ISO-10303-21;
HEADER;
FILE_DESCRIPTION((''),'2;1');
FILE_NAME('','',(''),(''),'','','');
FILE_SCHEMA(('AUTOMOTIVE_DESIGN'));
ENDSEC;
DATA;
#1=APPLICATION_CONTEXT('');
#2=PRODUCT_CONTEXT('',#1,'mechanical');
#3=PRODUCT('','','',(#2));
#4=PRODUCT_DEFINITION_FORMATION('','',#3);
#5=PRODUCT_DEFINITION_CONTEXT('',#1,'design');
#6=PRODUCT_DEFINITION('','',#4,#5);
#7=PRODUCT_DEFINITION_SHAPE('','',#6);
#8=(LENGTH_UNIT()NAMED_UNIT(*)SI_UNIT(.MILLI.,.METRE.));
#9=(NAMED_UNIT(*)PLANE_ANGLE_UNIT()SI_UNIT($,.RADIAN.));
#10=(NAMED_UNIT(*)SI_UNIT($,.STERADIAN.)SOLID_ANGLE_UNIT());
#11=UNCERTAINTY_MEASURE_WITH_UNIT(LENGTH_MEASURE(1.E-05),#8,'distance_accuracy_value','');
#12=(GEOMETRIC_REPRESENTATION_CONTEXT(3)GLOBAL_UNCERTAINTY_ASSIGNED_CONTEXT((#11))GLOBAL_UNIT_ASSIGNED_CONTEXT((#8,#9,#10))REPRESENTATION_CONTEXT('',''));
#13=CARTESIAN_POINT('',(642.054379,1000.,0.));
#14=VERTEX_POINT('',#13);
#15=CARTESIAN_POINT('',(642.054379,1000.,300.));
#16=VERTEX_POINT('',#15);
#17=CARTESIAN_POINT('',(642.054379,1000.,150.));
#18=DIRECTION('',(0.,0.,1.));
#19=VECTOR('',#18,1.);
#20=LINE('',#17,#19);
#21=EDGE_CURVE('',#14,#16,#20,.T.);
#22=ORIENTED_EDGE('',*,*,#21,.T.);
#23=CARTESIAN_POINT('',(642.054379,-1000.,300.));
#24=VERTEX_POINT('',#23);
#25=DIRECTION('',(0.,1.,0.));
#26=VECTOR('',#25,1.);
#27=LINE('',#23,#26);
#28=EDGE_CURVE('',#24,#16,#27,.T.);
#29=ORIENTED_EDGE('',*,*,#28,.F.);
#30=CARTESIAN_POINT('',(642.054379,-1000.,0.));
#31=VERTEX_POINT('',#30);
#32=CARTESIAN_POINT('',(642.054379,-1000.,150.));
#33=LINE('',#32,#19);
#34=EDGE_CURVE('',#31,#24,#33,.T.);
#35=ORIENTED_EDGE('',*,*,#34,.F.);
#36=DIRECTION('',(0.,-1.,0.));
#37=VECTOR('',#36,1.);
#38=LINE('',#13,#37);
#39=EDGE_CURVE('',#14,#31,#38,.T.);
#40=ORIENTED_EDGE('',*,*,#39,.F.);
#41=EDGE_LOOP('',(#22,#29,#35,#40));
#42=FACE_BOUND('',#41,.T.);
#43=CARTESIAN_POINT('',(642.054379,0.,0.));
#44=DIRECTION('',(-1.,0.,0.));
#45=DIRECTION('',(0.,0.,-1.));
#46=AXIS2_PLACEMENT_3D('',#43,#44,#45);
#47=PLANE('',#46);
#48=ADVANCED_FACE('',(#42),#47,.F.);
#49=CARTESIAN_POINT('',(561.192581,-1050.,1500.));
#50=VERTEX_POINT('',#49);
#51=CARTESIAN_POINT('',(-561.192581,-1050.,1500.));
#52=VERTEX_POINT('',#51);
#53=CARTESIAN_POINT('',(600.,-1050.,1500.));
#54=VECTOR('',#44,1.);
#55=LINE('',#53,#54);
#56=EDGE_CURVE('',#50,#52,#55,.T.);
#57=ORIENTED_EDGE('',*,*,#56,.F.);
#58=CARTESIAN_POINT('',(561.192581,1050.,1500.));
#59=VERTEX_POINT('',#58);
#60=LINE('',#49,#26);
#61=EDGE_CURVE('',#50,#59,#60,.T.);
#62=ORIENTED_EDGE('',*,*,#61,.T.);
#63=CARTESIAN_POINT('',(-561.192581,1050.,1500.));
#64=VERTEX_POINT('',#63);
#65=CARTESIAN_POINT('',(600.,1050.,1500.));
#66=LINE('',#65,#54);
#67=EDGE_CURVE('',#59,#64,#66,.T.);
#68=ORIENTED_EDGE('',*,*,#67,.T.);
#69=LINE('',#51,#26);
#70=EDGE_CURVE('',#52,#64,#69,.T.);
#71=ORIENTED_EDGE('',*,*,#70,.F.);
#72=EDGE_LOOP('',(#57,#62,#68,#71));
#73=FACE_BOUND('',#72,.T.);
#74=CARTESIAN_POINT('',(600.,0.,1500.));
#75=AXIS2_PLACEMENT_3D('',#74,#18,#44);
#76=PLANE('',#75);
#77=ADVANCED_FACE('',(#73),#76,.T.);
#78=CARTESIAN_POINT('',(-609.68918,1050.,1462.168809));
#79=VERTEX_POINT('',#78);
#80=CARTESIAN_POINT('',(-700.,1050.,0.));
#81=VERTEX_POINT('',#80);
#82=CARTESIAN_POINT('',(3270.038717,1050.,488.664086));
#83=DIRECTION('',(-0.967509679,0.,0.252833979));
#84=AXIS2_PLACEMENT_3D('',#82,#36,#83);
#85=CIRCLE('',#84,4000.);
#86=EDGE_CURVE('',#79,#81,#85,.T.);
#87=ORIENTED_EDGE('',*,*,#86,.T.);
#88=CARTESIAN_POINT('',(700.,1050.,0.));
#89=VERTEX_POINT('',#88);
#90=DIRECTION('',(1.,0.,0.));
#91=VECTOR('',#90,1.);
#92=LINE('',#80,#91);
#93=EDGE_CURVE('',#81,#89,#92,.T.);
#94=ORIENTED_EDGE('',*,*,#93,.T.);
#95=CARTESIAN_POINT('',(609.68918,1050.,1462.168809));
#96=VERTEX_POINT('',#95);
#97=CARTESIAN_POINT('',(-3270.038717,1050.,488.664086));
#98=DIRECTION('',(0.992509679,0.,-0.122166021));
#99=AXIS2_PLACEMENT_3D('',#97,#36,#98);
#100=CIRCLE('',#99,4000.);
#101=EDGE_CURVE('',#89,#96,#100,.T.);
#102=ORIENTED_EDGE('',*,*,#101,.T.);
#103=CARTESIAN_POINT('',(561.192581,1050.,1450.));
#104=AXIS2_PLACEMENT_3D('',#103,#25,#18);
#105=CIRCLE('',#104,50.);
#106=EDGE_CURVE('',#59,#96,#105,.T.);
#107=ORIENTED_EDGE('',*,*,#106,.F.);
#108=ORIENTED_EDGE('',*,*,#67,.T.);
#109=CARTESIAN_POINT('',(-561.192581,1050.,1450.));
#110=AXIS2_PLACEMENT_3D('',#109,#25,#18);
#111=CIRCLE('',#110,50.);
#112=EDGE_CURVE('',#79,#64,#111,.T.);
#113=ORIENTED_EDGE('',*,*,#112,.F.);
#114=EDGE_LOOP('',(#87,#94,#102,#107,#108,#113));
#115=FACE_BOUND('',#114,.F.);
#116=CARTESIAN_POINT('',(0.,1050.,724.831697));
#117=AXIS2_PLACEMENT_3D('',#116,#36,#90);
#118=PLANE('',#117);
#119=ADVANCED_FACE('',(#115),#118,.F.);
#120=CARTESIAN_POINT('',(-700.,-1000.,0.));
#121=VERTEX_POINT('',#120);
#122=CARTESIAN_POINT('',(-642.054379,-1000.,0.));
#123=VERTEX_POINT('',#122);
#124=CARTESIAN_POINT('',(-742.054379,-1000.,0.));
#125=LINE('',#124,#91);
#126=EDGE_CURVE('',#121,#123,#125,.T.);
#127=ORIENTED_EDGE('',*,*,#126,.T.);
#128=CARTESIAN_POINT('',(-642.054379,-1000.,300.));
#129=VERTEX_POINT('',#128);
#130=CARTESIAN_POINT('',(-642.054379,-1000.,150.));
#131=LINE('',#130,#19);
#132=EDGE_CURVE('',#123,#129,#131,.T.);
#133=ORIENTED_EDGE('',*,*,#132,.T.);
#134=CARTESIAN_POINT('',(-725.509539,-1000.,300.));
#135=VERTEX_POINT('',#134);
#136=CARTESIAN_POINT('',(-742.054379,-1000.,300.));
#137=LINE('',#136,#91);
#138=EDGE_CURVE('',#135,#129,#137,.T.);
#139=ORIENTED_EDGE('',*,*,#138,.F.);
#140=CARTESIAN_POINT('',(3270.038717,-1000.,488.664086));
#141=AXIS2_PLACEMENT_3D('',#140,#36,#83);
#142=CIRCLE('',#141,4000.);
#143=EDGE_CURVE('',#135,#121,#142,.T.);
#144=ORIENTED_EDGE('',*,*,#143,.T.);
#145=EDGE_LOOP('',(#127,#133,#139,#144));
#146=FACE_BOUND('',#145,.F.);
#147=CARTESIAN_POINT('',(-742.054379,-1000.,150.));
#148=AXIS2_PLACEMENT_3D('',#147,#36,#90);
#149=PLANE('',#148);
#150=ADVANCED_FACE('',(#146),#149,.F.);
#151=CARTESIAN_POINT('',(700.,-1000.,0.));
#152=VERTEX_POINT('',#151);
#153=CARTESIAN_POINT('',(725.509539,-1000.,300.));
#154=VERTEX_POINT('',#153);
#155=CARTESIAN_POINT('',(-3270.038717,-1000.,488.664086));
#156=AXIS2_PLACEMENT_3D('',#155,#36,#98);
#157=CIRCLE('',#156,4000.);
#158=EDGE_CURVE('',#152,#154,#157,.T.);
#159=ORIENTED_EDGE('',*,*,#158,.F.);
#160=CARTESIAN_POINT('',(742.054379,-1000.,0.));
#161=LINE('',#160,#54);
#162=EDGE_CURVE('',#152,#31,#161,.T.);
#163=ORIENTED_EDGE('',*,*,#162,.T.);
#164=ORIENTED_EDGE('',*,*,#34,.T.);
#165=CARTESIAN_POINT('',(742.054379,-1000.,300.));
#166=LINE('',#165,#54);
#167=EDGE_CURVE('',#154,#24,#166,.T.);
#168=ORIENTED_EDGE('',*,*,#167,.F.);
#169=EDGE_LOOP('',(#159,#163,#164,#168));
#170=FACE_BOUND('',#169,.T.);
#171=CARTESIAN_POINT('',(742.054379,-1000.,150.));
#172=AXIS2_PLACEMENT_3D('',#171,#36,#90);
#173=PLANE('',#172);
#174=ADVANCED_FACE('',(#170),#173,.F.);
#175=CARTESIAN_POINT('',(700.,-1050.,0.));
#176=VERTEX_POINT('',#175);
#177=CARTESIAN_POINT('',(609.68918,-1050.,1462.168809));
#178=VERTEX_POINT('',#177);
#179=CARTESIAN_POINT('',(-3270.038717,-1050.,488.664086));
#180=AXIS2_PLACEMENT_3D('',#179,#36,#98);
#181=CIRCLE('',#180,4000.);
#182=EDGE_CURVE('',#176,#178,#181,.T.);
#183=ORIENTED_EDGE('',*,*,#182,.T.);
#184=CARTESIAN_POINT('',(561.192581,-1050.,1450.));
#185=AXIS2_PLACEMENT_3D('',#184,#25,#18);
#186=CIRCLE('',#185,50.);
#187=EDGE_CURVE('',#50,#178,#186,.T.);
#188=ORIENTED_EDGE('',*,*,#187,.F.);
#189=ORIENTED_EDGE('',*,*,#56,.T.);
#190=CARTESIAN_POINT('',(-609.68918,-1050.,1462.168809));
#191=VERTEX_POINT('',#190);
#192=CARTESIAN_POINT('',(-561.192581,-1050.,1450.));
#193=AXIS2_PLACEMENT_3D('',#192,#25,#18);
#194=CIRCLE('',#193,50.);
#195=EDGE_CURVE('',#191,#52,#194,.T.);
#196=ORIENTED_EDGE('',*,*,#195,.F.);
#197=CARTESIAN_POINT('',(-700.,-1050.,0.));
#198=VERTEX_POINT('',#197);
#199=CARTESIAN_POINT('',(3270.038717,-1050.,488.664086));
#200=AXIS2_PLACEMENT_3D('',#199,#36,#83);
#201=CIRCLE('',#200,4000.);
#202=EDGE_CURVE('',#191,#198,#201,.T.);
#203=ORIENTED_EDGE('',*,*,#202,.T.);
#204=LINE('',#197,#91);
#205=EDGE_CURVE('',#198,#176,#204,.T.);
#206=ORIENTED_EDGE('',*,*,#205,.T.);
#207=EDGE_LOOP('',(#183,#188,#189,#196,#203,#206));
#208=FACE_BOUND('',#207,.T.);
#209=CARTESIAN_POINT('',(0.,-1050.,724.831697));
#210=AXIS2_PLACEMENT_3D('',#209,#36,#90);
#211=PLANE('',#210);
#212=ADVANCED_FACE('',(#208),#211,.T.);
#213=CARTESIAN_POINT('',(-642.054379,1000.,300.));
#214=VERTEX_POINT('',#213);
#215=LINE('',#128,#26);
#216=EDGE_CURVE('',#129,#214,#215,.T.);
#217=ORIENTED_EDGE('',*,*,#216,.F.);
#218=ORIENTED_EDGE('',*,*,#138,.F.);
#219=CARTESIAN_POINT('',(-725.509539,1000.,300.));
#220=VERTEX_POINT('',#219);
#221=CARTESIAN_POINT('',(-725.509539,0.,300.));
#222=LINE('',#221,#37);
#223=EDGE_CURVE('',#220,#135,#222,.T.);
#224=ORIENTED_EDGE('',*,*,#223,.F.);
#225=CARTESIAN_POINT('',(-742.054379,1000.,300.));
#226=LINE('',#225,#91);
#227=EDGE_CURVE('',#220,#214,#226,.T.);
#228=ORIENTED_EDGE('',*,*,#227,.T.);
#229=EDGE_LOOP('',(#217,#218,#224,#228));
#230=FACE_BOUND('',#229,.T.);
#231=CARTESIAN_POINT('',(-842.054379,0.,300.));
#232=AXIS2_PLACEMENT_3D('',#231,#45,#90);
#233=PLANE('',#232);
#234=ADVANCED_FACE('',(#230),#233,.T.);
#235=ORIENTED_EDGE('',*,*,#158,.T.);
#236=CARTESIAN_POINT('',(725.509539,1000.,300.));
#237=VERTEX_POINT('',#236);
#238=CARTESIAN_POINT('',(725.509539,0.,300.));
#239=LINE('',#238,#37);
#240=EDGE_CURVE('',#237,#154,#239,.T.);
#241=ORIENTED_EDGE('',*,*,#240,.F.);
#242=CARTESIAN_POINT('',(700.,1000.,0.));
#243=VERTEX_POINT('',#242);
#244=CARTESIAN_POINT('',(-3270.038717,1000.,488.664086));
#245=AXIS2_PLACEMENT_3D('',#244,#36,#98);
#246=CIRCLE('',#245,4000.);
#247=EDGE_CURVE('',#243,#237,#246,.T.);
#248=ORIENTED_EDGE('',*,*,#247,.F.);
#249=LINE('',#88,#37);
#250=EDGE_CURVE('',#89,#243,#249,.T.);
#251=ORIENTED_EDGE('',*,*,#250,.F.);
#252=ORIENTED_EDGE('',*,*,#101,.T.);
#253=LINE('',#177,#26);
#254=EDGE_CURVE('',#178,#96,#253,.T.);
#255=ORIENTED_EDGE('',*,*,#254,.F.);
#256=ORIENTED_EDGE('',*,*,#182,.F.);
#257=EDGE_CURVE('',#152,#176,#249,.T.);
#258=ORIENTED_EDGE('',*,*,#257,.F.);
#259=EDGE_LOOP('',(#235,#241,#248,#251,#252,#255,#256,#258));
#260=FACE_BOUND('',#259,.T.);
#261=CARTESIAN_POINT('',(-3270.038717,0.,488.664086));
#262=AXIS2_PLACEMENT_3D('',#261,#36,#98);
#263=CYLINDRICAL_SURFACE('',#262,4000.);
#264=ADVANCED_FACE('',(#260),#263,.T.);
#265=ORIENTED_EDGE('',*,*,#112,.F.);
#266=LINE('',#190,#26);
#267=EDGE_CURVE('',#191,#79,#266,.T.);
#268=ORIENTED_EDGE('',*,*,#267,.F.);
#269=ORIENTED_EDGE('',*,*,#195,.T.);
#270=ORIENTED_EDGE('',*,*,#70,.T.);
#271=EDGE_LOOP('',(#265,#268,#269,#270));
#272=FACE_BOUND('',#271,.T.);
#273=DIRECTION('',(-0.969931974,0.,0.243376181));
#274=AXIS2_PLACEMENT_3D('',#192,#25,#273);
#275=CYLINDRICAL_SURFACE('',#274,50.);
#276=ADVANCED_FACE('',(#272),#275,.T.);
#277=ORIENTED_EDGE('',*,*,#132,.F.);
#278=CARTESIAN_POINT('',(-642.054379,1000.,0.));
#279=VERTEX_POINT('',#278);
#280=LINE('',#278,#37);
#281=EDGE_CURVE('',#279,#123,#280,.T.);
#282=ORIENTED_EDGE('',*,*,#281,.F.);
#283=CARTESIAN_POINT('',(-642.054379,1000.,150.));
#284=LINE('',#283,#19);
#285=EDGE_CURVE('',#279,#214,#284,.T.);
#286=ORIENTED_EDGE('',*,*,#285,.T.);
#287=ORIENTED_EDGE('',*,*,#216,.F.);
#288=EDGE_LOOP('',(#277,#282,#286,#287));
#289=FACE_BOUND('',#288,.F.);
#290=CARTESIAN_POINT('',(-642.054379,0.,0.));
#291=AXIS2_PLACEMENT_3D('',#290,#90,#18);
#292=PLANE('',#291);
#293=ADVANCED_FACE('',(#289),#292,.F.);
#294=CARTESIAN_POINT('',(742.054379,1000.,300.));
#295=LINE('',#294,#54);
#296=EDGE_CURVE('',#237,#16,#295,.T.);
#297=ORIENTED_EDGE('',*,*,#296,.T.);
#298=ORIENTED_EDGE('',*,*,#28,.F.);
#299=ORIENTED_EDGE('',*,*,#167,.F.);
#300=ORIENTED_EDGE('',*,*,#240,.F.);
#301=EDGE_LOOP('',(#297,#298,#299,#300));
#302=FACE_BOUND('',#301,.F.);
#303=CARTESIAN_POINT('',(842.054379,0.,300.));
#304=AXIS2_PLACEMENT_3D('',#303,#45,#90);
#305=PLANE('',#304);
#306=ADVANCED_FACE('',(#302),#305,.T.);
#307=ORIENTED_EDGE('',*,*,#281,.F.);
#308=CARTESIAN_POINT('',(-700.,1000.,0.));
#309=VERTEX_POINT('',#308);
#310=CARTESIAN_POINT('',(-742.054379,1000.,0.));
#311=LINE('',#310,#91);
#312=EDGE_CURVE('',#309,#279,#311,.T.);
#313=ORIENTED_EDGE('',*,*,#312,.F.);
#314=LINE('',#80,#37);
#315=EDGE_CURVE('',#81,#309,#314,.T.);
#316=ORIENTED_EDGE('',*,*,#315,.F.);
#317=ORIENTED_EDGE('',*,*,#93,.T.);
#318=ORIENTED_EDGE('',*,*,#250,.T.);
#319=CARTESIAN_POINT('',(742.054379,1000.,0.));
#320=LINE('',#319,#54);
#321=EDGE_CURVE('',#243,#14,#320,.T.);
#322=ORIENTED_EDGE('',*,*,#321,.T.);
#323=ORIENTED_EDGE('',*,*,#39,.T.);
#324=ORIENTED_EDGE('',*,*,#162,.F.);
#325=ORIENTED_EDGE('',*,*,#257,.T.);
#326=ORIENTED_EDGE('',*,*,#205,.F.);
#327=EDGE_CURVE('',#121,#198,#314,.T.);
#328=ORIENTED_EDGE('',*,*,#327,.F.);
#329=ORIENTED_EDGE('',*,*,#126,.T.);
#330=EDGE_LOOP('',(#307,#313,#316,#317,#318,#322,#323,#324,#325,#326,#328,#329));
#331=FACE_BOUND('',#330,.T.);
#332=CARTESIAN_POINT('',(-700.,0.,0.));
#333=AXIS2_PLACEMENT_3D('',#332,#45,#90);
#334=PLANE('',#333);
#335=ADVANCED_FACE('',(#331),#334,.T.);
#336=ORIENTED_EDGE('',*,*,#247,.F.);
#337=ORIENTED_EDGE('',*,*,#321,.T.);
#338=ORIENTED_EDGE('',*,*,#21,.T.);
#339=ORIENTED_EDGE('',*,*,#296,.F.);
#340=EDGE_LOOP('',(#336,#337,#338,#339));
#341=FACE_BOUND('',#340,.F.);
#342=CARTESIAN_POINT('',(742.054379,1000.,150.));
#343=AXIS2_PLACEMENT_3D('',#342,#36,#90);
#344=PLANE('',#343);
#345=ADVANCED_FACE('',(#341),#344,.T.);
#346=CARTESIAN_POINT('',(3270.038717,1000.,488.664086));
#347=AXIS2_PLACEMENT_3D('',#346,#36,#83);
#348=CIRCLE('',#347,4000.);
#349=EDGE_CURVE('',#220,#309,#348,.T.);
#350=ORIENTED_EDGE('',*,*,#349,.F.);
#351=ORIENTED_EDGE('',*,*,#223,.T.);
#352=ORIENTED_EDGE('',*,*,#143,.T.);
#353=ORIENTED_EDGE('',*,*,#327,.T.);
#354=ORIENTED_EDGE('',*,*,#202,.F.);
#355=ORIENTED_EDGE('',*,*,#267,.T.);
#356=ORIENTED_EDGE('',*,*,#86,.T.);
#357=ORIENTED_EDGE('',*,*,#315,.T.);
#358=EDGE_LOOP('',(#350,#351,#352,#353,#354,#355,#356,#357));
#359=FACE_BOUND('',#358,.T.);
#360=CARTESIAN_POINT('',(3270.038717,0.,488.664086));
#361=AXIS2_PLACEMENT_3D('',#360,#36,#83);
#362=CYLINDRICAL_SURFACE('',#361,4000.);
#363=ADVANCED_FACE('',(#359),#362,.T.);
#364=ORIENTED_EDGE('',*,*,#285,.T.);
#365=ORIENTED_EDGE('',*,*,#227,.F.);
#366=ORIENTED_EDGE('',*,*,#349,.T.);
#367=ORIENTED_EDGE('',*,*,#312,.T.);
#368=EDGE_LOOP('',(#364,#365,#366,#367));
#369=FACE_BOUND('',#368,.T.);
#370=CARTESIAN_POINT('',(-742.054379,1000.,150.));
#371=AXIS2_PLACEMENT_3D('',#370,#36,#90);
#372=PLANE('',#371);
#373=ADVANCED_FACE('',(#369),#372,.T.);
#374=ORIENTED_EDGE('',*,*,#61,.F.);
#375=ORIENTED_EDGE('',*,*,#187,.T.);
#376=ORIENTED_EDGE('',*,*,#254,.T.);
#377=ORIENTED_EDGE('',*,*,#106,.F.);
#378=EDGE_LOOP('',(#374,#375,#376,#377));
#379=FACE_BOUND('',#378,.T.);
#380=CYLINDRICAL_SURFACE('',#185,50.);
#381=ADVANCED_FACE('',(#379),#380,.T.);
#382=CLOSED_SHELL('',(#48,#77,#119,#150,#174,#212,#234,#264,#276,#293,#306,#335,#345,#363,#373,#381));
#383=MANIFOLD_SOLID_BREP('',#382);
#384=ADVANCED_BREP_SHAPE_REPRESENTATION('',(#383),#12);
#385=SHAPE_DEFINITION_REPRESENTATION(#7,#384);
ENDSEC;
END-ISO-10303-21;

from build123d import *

# Parameters (mm, degrees)
F1_DEPTH = 1050
F2_W     = 200
F2_H     = 300
F3_DEPTH = 1000
F4_R     = 50


# Not quite as in the source:
# - a pattern or mirror of a feature is missing from the dataset's text; its kind, count and spacing are read off the source's solid


with BuildPart() as f1:
    # F0 (on Front) → F1 (new body, symmetric)
    with BuildSketch(Plane.XZ):
        with BuildLine():
            ThreePointArc((-600, 1500), (-721.1019148035, 754.7401276536), (-700, 0))
            Line((-700, 0), (700, 0))
            ThreePointArc((700, 0), (721.1019148035, 754.7401276536), (600, 1500))
            Line((600, 1500), (-600, 1500))
        make_face()
    extrude(amount=F1_DEPTH, both=True)

    # F2 (on Front) → F3 (cut, symmetric)
    with BuildSketch(Plane.XZ):
        with Locations((-742.0543789864, 150)):
            Rectangle(F2_W, F2_H)
    f3 = extrude(amount=F3_DEPTH, both=True, mode=Mode.SUBTRACT)

    # F3_copies: F3 across plane
    add(f3.mirror(Plane(origin=(0, 0, 0), x_dir=(0, 0, 1), z_dir=(1, 0, 0))), mode=Mode.SUBTRACT)

    # F4
    f4_edges = [f1.edges().sort_by_distance(p)[0] for p in [
        (600, 0, 1500),
        (-600, 0, 1500),
    ]]
    fillet(f4_edges, radius=F4_R)


solid = f1.part
